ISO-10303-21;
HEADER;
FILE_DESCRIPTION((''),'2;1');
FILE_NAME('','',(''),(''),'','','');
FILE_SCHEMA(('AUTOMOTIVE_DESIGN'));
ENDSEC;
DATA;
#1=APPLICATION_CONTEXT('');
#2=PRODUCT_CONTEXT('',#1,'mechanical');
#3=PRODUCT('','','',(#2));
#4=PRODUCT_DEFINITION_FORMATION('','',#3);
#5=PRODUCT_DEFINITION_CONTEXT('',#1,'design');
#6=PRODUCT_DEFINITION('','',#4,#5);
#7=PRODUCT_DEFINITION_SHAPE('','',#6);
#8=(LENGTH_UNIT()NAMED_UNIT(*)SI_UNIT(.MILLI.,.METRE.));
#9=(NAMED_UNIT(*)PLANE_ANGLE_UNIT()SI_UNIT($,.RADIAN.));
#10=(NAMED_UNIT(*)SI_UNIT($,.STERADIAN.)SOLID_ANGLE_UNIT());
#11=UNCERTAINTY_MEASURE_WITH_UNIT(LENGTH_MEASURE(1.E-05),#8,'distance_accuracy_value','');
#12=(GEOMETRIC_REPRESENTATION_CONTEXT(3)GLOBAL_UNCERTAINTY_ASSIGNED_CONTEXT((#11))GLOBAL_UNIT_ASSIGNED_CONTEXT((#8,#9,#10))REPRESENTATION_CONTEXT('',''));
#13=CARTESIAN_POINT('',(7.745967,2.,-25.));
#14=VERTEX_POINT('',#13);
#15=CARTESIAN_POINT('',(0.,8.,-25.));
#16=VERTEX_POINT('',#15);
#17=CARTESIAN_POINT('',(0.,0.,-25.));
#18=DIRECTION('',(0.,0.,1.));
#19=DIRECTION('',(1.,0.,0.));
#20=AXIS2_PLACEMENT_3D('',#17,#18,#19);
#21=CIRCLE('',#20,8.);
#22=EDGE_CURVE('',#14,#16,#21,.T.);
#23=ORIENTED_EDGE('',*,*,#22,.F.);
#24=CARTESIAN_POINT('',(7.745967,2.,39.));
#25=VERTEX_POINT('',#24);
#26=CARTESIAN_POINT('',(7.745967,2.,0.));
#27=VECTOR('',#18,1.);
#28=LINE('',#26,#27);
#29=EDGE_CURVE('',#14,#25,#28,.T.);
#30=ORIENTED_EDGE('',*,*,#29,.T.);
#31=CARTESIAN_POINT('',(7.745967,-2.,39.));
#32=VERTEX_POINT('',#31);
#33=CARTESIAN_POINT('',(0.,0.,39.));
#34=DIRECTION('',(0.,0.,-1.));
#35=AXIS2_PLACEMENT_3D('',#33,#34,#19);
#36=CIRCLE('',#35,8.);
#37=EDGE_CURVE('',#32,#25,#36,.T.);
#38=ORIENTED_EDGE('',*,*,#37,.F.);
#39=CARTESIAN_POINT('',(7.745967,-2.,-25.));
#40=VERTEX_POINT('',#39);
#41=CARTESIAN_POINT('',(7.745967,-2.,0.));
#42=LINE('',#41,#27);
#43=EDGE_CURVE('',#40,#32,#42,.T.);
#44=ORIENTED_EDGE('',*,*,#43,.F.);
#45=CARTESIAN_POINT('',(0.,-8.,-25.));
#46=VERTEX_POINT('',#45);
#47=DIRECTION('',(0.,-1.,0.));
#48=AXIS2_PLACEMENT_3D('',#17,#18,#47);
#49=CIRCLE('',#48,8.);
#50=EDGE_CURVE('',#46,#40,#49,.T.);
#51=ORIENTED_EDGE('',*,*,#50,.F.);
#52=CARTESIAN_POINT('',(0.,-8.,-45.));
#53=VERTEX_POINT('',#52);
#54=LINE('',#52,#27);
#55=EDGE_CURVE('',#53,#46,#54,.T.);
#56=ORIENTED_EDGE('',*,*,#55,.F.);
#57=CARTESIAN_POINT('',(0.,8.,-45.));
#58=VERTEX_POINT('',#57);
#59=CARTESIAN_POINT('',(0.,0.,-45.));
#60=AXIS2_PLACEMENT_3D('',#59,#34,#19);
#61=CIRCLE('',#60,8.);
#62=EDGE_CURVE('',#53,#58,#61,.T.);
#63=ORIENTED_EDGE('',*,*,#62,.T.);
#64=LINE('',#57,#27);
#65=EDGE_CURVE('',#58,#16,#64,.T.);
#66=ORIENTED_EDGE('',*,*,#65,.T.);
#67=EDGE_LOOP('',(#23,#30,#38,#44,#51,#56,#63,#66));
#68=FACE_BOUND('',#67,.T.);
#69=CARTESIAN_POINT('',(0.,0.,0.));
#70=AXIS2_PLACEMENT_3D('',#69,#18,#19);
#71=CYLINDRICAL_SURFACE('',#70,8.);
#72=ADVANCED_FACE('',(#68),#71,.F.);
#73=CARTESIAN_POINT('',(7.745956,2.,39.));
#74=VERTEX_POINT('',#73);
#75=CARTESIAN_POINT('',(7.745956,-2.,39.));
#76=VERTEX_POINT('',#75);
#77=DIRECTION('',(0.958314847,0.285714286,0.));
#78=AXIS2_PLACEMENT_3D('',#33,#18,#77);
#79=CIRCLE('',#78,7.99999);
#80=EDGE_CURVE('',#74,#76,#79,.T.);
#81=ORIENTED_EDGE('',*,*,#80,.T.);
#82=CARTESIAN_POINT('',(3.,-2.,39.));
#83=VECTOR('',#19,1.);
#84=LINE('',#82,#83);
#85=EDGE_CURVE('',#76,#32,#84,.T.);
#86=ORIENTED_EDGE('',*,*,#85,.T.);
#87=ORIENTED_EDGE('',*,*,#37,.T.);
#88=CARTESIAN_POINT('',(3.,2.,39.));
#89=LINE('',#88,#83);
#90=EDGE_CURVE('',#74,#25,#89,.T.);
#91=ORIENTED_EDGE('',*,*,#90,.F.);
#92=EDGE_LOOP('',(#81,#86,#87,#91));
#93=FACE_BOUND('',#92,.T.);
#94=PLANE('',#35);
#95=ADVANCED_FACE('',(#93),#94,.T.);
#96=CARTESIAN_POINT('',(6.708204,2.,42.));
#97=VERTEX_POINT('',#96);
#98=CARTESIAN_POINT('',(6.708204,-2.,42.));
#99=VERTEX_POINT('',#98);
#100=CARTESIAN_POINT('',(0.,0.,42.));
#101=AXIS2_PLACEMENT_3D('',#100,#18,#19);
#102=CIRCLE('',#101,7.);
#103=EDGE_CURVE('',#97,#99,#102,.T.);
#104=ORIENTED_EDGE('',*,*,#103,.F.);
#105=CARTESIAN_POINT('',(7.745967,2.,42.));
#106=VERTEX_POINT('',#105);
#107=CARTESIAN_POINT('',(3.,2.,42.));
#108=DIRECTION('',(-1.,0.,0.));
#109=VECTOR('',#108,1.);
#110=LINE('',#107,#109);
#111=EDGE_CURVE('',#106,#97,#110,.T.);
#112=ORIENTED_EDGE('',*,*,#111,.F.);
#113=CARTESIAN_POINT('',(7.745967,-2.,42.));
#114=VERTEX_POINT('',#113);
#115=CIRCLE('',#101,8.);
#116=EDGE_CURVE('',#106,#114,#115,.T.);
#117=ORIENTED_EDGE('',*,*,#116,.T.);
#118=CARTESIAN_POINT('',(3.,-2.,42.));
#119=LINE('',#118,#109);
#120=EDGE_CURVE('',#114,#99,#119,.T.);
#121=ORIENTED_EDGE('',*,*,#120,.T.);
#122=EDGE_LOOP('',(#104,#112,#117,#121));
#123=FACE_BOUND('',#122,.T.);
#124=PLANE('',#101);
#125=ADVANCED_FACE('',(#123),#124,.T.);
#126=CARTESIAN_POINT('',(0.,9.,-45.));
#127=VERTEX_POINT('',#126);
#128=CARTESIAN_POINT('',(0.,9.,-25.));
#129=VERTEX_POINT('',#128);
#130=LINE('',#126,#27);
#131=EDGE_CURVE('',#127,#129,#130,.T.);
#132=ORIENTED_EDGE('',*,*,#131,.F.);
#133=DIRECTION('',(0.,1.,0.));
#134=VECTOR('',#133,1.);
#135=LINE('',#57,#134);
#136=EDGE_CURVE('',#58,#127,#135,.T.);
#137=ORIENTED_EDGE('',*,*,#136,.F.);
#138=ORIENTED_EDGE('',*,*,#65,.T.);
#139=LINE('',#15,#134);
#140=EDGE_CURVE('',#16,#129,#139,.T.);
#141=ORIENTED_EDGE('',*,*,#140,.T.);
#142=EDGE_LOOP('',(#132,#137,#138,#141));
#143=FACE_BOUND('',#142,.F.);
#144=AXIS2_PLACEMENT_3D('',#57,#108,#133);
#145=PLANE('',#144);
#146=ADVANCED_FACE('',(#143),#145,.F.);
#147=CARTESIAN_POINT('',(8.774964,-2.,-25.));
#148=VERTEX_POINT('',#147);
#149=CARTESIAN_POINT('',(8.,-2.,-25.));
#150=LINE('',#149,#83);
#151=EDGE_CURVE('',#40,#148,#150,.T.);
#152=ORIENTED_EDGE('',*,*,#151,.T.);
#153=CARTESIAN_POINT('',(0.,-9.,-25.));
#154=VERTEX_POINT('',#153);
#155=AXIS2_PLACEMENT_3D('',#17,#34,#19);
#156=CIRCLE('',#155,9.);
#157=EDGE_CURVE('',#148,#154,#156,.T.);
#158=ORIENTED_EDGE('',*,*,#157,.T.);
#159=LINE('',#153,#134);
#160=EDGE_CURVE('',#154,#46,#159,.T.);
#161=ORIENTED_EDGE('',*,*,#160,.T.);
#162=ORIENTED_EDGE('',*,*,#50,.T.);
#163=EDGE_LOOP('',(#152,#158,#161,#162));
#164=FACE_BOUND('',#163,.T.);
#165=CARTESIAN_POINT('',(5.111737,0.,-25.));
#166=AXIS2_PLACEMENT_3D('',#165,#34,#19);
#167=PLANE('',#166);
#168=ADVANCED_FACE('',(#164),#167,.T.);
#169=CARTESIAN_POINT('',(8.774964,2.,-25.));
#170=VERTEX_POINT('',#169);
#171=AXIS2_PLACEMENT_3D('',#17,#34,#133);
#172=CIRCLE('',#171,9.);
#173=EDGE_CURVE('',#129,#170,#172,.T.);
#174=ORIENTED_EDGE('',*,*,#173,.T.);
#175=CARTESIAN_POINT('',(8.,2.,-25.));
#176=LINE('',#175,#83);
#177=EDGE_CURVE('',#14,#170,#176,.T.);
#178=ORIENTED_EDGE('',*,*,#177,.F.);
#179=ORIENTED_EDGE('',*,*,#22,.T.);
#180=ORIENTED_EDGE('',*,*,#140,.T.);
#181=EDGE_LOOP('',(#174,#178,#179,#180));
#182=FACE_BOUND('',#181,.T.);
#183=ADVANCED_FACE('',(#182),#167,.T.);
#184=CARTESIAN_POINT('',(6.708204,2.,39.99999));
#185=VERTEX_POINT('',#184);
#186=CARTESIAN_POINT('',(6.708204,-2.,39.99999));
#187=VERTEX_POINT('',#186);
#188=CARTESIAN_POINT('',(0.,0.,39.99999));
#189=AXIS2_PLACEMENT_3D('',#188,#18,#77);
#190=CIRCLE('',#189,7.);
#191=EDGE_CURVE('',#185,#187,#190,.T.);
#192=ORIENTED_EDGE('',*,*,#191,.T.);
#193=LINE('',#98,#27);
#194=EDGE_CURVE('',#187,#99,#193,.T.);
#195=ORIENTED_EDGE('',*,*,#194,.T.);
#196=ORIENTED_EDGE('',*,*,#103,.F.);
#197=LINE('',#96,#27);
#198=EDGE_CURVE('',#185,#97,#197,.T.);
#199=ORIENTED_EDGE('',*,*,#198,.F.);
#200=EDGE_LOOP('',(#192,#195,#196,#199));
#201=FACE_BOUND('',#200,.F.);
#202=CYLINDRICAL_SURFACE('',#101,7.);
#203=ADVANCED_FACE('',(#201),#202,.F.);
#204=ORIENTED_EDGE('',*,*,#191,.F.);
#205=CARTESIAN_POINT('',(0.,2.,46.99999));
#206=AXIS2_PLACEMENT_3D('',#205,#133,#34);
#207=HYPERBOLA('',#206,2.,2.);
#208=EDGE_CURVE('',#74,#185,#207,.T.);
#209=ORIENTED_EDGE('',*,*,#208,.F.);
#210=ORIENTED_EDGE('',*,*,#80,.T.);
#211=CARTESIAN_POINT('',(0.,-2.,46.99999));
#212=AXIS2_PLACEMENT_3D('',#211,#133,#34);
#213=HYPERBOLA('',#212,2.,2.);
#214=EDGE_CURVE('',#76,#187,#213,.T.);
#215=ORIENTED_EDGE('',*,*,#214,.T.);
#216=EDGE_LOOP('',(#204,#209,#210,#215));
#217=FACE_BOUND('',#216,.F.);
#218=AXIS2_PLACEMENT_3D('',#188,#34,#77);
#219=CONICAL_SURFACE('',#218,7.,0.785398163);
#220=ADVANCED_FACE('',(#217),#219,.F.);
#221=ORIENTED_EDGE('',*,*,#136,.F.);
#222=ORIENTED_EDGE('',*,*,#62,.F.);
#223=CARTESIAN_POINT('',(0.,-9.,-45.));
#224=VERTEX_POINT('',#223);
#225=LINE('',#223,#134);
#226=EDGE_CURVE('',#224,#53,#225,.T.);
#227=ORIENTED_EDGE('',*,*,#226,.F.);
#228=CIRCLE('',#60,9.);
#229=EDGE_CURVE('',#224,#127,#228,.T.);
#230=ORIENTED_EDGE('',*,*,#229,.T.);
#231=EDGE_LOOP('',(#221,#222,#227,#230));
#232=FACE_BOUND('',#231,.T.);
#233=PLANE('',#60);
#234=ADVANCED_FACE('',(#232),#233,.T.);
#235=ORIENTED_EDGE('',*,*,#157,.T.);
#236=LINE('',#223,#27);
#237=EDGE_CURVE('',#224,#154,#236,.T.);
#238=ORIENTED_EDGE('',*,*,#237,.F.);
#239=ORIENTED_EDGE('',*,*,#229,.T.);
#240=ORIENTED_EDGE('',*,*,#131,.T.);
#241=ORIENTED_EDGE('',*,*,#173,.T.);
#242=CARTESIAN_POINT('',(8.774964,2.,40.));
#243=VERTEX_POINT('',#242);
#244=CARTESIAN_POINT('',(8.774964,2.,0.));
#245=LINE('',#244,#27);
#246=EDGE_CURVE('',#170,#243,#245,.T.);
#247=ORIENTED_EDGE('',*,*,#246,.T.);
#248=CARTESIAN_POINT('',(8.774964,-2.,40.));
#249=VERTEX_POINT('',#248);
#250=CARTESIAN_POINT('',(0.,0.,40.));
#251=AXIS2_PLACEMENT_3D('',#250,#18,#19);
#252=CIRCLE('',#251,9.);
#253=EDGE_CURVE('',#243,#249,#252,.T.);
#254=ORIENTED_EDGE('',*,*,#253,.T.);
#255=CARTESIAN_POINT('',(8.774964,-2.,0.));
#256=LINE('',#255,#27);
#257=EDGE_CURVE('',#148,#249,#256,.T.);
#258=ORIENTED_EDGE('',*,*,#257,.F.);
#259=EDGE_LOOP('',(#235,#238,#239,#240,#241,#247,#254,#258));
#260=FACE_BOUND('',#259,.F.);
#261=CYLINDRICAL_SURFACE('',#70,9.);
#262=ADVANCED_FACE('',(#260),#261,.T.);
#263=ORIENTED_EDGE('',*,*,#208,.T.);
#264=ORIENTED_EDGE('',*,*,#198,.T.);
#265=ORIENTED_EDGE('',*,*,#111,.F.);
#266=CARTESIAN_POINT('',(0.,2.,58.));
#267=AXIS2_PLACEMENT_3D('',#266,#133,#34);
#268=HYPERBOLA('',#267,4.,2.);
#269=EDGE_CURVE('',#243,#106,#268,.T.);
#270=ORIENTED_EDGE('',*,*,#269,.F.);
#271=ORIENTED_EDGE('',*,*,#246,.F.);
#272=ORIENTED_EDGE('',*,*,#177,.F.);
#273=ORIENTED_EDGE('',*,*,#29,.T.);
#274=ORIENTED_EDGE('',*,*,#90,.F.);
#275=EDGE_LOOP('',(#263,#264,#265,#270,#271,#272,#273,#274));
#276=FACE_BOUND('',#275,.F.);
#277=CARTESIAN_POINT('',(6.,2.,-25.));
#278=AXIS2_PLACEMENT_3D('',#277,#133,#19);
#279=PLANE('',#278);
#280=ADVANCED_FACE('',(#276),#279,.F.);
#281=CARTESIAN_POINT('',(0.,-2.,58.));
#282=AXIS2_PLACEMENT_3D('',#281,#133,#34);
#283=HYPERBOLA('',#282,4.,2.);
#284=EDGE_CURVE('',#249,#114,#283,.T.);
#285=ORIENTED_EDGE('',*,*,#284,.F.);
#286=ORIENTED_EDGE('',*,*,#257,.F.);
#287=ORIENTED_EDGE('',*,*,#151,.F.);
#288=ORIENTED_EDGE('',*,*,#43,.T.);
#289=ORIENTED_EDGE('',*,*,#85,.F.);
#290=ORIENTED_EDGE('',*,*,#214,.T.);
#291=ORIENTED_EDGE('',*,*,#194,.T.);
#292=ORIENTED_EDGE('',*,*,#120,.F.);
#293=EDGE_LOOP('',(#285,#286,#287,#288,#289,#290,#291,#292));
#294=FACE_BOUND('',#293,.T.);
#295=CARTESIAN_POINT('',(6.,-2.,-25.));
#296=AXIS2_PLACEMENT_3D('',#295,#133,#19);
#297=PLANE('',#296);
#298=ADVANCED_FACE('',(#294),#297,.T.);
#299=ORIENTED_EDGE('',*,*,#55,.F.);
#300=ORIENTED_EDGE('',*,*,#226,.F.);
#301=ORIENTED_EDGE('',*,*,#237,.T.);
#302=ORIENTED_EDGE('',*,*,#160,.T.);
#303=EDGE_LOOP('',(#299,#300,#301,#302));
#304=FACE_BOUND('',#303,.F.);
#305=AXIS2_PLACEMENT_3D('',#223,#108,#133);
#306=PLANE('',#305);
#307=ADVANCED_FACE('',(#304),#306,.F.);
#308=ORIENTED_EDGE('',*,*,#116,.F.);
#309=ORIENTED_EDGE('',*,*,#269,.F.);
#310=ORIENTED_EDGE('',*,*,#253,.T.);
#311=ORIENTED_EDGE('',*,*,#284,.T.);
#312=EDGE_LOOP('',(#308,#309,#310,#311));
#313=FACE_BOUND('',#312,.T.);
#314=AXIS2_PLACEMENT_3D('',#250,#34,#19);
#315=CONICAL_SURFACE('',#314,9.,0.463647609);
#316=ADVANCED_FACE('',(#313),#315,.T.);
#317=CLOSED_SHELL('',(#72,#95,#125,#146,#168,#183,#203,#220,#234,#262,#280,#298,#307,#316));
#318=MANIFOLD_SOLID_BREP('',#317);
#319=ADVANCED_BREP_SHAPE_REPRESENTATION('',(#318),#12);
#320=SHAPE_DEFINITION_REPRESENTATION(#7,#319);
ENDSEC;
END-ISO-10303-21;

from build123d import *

# Parameters (mm, degrees)
F0_R      = 9
F1_DEPTH  = 40
F3_R      = 9
F4_R      = 8
F6_R      = 8
F8_DEPTH  = 39
F9_R      = 9
F9_R_2    = 8
F10_DEPTH = 45
F12_DEPTH = 20
F13_W     = 4
F13_H     = 4
F14_DEPTH = 100
F7_R      = 7
F15_DEPTH = 25
F16_SIZE2 = 0.99999
F16_SIZE  = 0.99999


# Not quite as in the source:
# - a fillet or chamfer is up to 0.001 mm smaller than in the source, because OpenCascade refuses the exact size


with BuildPart() as f1:
    # F0 (on Top) → F1 (new body)
    with BuildSketch(Plane.XY):
        Circle(F0_R)
    extrude(amount=F1_DEPTH)

    # F3 (on face) → F5 section 0
    with BuildSketch(Plane.XY.offset(40)):
        Circle(F3_R)
    # F4 (on offset) → F5 section 1
    with BuildSketch(Plane.XY.offset(42)):
        Circle(F4_R)
    loft()

    # F6 (on face) → F8 (cut)
    with BuildSketch(Plane(origin=(0, 0, 0), x_dir=(1, 0, 0), z_dir=(0, 0, -1))):
        Circle(F6_R)
    extrude(amount=-F8_DEPTH, mode=Mode.SUBTRACT)

    # F9 (on face) → F10 (join)
    with BuildSketch(Plane(origin=(0, 0, 0), x_dir=(1, 0, 0), z_dir=(0, 0, -1))):
        Circle(F9_R)
        Circle(F9_R_2, mode=Mode.SUBTRACT)
    extrude(amount=F10_DEPTH)

    # F11 (on face) → F12 (cut)
    with BuildSketch(Plane(origin=(0, 0, -45), x_dir=(1, 0, 0), z_dir=(0, 0, -1))):
        with BuildLine():
            ThreePointArc((0, -9), (6.3639610307, -6.3639610307), (9, 0))
            ThreePointArc((9, 0), (6.3639610307, 6.3639610307), (0, 9))
            Line((0, 9), (0, 8))
            ThreePointArc((0, 8), (5.6568542495, 5.6568542495), (8, 0))
            ThreePointArc((8, 0), (5.6568542495, -5.6568542495), (0, -8))
            Line((0, -8), (0, -9))
        make_face()
    extrude(amount=-F12_DEPTH, mode=Mode.SUBTRACT)

    # F13 (on face) → F14 (cut)
    with BuildSketch(Plane(origin=(0, 0, -25), x_dir=(1, 0, 0), z_dir=(0, 0, -1))):
        with Locations((8, 0)):
            Rectangle(F13_W, F13_H)
    extrude(amount=-F14_DEPTH, mode=Mode.SUBTRACT)

    # F7 (on face) → F15 (cut)
    with BuildSketch(Plane.XY.offset(42)):
        Circle(F7_R)
    extrude(amount=-F15_DEPTH, mode=Mode.SUBTRACT)

    # F16 (size 1 and 1 in the source; OpenCascade refuses exactly that, so slightly less here)
    f16_edges = [f1.edges().sort_by_distance(p)[0] for p in [
        (-7, 0, 39),
    ]]
    chamfer(f16_edges, length=F16_SIZE, length2=F16_SIZE2)


solid = f1.part
